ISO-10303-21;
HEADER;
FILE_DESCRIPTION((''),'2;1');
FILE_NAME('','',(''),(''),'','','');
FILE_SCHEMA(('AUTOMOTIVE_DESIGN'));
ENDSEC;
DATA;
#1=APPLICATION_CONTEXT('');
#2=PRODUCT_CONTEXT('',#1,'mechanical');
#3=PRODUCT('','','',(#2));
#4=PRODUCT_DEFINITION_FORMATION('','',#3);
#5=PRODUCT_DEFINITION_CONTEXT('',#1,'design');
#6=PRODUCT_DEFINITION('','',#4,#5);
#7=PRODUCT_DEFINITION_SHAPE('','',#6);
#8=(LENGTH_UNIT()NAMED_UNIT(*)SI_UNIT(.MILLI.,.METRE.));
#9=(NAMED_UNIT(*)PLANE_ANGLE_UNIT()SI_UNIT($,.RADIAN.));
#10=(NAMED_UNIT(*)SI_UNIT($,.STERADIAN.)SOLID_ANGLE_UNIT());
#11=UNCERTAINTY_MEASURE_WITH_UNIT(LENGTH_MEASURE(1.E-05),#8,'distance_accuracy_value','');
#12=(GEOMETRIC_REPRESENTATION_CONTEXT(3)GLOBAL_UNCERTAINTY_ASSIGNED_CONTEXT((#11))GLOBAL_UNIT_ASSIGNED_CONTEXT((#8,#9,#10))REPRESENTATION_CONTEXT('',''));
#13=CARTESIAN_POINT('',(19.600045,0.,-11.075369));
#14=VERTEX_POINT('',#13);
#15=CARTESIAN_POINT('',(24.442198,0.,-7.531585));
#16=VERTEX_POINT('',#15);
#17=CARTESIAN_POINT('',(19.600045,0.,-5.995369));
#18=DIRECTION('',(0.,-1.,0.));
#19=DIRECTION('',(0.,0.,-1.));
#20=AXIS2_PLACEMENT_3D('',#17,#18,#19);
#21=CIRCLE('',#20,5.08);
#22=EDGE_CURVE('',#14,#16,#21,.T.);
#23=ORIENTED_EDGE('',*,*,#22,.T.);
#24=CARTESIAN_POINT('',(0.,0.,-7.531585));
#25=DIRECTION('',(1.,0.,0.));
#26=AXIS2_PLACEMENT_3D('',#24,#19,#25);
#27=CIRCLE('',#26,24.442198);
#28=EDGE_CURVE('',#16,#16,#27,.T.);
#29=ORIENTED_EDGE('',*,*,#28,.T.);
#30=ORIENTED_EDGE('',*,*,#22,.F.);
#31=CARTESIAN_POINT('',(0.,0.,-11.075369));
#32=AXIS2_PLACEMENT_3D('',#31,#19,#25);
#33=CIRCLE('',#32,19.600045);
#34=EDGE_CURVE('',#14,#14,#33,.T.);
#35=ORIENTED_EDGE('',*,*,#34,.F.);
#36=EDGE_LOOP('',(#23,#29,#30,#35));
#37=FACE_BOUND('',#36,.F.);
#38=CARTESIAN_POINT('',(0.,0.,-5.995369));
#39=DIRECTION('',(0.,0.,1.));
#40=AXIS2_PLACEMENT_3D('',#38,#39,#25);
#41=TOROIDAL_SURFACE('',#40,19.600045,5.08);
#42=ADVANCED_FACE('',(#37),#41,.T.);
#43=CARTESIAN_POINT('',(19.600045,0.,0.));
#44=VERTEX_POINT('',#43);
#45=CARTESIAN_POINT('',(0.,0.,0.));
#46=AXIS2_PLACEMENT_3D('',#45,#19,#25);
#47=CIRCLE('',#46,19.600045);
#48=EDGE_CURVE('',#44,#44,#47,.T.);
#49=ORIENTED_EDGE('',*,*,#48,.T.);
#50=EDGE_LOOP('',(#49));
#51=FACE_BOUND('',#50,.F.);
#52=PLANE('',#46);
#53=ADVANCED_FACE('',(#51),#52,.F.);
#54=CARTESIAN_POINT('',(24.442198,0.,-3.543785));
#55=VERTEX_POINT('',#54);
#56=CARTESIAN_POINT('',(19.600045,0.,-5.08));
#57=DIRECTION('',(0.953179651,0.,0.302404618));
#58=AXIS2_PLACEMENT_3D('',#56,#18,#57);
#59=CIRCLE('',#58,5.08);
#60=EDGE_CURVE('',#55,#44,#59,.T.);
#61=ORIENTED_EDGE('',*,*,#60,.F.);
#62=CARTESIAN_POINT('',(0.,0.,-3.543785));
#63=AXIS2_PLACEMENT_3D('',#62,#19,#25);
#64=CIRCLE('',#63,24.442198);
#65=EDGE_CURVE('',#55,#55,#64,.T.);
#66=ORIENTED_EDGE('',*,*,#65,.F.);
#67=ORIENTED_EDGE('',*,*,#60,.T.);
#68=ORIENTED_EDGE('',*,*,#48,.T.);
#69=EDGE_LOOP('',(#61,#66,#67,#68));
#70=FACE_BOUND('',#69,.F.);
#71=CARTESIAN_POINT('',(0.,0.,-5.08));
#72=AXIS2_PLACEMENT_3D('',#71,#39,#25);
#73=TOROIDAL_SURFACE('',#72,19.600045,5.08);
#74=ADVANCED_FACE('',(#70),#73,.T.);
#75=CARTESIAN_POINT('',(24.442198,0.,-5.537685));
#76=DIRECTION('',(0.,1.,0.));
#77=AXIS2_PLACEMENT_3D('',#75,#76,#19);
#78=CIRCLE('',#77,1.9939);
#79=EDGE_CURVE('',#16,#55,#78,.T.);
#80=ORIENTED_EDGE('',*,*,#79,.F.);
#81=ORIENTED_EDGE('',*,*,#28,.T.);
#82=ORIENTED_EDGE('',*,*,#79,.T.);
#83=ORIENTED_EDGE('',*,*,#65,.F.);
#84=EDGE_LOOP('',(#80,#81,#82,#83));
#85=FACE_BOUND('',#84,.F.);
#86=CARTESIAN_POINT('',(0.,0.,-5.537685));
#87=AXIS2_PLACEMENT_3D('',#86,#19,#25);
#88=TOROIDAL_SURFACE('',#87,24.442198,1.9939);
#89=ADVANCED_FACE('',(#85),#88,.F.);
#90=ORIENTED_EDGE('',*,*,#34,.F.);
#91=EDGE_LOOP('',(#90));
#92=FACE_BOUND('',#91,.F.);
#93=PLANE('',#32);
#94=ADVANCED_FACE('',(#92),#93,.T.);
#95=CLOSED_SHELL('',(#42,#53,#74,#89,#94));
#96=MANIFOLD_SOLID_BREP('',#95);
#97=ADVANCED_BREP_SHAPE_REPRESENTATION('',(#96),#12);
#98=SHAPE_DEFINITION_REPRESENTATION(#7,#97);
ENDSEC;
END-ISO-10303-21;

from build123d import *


# Not quite as in the source:
# - a fillet or chamfer that OpenCascade refuses, or shapes differently, is made with other operations: its cross-section is extruded or revolved along the edge and cut away or added


with BuildPart() as f1:
    # F0 (on Front) → F1 (revolve)
    with BuildSketch(Plane.XZ):
        with BuildLine():
            Line((24.442197755, 0), (0, 0))
            Line((0, 0), (0, -11.0753690824))
            Line((0, -11.0753690824), (24.442197755, -11.0753690824))
            Line((24.442197755, -11.0753690824), (24.442197755, -7.5315845412))
            ThreePointArc((24.442197755, -7.5315845412), (22.448297755, -5.5376845412), (24.442197755, -3.5437845412))
            Line((24.442197755, -3.5437845412), (24.442197755, 0))
        make_face()
    revolve(axis=Axis((0, 0, -5.5376845412), (0, 0, -1)))

    # F2: fillet of radius 5.08 on 2 edges, made by hand

    # F2_s1 → F2_t2 (revolve, cut)
    with BuildSketch(Plane.XZ):
        with BuildLine():
            ThreePointArc((24.442197755, -3.5437845412), (22.6002472435, -0.9805869609), (19.6000451279, 0))
            Line((19.6000451279, 0), (24.442197755, 0))
            Line((24.442197755, 0), (24.442197755, -3.5437845412))
        make_face()
    revolve(axis=Axis((0, 0, 0), (0, 0, -1)), mode=Mode.SUBTRACT)

    # F2_s3 → F2_t4 (revolve, cut)
    with BuildSketch(Plane.XZ):
        with BuildLine():
            ThreePointArc((19.6000451279, -11.0753690824), (22.6002472435, -10.0947821215), (24.442197755, -7.5315845412))
            Line((24.442197755, -7.5315845412), (24.442197755, -11.0753690824))
            Line((24.442197755, -11.0753690824), (19.6000451279, -11.0753690824))
        make_face()
    revolve(axis=Axis((0, 0, -11.0753690824), (0, 0, -1)), mode=Mode.SUBTRACT)


solid = f1.part
